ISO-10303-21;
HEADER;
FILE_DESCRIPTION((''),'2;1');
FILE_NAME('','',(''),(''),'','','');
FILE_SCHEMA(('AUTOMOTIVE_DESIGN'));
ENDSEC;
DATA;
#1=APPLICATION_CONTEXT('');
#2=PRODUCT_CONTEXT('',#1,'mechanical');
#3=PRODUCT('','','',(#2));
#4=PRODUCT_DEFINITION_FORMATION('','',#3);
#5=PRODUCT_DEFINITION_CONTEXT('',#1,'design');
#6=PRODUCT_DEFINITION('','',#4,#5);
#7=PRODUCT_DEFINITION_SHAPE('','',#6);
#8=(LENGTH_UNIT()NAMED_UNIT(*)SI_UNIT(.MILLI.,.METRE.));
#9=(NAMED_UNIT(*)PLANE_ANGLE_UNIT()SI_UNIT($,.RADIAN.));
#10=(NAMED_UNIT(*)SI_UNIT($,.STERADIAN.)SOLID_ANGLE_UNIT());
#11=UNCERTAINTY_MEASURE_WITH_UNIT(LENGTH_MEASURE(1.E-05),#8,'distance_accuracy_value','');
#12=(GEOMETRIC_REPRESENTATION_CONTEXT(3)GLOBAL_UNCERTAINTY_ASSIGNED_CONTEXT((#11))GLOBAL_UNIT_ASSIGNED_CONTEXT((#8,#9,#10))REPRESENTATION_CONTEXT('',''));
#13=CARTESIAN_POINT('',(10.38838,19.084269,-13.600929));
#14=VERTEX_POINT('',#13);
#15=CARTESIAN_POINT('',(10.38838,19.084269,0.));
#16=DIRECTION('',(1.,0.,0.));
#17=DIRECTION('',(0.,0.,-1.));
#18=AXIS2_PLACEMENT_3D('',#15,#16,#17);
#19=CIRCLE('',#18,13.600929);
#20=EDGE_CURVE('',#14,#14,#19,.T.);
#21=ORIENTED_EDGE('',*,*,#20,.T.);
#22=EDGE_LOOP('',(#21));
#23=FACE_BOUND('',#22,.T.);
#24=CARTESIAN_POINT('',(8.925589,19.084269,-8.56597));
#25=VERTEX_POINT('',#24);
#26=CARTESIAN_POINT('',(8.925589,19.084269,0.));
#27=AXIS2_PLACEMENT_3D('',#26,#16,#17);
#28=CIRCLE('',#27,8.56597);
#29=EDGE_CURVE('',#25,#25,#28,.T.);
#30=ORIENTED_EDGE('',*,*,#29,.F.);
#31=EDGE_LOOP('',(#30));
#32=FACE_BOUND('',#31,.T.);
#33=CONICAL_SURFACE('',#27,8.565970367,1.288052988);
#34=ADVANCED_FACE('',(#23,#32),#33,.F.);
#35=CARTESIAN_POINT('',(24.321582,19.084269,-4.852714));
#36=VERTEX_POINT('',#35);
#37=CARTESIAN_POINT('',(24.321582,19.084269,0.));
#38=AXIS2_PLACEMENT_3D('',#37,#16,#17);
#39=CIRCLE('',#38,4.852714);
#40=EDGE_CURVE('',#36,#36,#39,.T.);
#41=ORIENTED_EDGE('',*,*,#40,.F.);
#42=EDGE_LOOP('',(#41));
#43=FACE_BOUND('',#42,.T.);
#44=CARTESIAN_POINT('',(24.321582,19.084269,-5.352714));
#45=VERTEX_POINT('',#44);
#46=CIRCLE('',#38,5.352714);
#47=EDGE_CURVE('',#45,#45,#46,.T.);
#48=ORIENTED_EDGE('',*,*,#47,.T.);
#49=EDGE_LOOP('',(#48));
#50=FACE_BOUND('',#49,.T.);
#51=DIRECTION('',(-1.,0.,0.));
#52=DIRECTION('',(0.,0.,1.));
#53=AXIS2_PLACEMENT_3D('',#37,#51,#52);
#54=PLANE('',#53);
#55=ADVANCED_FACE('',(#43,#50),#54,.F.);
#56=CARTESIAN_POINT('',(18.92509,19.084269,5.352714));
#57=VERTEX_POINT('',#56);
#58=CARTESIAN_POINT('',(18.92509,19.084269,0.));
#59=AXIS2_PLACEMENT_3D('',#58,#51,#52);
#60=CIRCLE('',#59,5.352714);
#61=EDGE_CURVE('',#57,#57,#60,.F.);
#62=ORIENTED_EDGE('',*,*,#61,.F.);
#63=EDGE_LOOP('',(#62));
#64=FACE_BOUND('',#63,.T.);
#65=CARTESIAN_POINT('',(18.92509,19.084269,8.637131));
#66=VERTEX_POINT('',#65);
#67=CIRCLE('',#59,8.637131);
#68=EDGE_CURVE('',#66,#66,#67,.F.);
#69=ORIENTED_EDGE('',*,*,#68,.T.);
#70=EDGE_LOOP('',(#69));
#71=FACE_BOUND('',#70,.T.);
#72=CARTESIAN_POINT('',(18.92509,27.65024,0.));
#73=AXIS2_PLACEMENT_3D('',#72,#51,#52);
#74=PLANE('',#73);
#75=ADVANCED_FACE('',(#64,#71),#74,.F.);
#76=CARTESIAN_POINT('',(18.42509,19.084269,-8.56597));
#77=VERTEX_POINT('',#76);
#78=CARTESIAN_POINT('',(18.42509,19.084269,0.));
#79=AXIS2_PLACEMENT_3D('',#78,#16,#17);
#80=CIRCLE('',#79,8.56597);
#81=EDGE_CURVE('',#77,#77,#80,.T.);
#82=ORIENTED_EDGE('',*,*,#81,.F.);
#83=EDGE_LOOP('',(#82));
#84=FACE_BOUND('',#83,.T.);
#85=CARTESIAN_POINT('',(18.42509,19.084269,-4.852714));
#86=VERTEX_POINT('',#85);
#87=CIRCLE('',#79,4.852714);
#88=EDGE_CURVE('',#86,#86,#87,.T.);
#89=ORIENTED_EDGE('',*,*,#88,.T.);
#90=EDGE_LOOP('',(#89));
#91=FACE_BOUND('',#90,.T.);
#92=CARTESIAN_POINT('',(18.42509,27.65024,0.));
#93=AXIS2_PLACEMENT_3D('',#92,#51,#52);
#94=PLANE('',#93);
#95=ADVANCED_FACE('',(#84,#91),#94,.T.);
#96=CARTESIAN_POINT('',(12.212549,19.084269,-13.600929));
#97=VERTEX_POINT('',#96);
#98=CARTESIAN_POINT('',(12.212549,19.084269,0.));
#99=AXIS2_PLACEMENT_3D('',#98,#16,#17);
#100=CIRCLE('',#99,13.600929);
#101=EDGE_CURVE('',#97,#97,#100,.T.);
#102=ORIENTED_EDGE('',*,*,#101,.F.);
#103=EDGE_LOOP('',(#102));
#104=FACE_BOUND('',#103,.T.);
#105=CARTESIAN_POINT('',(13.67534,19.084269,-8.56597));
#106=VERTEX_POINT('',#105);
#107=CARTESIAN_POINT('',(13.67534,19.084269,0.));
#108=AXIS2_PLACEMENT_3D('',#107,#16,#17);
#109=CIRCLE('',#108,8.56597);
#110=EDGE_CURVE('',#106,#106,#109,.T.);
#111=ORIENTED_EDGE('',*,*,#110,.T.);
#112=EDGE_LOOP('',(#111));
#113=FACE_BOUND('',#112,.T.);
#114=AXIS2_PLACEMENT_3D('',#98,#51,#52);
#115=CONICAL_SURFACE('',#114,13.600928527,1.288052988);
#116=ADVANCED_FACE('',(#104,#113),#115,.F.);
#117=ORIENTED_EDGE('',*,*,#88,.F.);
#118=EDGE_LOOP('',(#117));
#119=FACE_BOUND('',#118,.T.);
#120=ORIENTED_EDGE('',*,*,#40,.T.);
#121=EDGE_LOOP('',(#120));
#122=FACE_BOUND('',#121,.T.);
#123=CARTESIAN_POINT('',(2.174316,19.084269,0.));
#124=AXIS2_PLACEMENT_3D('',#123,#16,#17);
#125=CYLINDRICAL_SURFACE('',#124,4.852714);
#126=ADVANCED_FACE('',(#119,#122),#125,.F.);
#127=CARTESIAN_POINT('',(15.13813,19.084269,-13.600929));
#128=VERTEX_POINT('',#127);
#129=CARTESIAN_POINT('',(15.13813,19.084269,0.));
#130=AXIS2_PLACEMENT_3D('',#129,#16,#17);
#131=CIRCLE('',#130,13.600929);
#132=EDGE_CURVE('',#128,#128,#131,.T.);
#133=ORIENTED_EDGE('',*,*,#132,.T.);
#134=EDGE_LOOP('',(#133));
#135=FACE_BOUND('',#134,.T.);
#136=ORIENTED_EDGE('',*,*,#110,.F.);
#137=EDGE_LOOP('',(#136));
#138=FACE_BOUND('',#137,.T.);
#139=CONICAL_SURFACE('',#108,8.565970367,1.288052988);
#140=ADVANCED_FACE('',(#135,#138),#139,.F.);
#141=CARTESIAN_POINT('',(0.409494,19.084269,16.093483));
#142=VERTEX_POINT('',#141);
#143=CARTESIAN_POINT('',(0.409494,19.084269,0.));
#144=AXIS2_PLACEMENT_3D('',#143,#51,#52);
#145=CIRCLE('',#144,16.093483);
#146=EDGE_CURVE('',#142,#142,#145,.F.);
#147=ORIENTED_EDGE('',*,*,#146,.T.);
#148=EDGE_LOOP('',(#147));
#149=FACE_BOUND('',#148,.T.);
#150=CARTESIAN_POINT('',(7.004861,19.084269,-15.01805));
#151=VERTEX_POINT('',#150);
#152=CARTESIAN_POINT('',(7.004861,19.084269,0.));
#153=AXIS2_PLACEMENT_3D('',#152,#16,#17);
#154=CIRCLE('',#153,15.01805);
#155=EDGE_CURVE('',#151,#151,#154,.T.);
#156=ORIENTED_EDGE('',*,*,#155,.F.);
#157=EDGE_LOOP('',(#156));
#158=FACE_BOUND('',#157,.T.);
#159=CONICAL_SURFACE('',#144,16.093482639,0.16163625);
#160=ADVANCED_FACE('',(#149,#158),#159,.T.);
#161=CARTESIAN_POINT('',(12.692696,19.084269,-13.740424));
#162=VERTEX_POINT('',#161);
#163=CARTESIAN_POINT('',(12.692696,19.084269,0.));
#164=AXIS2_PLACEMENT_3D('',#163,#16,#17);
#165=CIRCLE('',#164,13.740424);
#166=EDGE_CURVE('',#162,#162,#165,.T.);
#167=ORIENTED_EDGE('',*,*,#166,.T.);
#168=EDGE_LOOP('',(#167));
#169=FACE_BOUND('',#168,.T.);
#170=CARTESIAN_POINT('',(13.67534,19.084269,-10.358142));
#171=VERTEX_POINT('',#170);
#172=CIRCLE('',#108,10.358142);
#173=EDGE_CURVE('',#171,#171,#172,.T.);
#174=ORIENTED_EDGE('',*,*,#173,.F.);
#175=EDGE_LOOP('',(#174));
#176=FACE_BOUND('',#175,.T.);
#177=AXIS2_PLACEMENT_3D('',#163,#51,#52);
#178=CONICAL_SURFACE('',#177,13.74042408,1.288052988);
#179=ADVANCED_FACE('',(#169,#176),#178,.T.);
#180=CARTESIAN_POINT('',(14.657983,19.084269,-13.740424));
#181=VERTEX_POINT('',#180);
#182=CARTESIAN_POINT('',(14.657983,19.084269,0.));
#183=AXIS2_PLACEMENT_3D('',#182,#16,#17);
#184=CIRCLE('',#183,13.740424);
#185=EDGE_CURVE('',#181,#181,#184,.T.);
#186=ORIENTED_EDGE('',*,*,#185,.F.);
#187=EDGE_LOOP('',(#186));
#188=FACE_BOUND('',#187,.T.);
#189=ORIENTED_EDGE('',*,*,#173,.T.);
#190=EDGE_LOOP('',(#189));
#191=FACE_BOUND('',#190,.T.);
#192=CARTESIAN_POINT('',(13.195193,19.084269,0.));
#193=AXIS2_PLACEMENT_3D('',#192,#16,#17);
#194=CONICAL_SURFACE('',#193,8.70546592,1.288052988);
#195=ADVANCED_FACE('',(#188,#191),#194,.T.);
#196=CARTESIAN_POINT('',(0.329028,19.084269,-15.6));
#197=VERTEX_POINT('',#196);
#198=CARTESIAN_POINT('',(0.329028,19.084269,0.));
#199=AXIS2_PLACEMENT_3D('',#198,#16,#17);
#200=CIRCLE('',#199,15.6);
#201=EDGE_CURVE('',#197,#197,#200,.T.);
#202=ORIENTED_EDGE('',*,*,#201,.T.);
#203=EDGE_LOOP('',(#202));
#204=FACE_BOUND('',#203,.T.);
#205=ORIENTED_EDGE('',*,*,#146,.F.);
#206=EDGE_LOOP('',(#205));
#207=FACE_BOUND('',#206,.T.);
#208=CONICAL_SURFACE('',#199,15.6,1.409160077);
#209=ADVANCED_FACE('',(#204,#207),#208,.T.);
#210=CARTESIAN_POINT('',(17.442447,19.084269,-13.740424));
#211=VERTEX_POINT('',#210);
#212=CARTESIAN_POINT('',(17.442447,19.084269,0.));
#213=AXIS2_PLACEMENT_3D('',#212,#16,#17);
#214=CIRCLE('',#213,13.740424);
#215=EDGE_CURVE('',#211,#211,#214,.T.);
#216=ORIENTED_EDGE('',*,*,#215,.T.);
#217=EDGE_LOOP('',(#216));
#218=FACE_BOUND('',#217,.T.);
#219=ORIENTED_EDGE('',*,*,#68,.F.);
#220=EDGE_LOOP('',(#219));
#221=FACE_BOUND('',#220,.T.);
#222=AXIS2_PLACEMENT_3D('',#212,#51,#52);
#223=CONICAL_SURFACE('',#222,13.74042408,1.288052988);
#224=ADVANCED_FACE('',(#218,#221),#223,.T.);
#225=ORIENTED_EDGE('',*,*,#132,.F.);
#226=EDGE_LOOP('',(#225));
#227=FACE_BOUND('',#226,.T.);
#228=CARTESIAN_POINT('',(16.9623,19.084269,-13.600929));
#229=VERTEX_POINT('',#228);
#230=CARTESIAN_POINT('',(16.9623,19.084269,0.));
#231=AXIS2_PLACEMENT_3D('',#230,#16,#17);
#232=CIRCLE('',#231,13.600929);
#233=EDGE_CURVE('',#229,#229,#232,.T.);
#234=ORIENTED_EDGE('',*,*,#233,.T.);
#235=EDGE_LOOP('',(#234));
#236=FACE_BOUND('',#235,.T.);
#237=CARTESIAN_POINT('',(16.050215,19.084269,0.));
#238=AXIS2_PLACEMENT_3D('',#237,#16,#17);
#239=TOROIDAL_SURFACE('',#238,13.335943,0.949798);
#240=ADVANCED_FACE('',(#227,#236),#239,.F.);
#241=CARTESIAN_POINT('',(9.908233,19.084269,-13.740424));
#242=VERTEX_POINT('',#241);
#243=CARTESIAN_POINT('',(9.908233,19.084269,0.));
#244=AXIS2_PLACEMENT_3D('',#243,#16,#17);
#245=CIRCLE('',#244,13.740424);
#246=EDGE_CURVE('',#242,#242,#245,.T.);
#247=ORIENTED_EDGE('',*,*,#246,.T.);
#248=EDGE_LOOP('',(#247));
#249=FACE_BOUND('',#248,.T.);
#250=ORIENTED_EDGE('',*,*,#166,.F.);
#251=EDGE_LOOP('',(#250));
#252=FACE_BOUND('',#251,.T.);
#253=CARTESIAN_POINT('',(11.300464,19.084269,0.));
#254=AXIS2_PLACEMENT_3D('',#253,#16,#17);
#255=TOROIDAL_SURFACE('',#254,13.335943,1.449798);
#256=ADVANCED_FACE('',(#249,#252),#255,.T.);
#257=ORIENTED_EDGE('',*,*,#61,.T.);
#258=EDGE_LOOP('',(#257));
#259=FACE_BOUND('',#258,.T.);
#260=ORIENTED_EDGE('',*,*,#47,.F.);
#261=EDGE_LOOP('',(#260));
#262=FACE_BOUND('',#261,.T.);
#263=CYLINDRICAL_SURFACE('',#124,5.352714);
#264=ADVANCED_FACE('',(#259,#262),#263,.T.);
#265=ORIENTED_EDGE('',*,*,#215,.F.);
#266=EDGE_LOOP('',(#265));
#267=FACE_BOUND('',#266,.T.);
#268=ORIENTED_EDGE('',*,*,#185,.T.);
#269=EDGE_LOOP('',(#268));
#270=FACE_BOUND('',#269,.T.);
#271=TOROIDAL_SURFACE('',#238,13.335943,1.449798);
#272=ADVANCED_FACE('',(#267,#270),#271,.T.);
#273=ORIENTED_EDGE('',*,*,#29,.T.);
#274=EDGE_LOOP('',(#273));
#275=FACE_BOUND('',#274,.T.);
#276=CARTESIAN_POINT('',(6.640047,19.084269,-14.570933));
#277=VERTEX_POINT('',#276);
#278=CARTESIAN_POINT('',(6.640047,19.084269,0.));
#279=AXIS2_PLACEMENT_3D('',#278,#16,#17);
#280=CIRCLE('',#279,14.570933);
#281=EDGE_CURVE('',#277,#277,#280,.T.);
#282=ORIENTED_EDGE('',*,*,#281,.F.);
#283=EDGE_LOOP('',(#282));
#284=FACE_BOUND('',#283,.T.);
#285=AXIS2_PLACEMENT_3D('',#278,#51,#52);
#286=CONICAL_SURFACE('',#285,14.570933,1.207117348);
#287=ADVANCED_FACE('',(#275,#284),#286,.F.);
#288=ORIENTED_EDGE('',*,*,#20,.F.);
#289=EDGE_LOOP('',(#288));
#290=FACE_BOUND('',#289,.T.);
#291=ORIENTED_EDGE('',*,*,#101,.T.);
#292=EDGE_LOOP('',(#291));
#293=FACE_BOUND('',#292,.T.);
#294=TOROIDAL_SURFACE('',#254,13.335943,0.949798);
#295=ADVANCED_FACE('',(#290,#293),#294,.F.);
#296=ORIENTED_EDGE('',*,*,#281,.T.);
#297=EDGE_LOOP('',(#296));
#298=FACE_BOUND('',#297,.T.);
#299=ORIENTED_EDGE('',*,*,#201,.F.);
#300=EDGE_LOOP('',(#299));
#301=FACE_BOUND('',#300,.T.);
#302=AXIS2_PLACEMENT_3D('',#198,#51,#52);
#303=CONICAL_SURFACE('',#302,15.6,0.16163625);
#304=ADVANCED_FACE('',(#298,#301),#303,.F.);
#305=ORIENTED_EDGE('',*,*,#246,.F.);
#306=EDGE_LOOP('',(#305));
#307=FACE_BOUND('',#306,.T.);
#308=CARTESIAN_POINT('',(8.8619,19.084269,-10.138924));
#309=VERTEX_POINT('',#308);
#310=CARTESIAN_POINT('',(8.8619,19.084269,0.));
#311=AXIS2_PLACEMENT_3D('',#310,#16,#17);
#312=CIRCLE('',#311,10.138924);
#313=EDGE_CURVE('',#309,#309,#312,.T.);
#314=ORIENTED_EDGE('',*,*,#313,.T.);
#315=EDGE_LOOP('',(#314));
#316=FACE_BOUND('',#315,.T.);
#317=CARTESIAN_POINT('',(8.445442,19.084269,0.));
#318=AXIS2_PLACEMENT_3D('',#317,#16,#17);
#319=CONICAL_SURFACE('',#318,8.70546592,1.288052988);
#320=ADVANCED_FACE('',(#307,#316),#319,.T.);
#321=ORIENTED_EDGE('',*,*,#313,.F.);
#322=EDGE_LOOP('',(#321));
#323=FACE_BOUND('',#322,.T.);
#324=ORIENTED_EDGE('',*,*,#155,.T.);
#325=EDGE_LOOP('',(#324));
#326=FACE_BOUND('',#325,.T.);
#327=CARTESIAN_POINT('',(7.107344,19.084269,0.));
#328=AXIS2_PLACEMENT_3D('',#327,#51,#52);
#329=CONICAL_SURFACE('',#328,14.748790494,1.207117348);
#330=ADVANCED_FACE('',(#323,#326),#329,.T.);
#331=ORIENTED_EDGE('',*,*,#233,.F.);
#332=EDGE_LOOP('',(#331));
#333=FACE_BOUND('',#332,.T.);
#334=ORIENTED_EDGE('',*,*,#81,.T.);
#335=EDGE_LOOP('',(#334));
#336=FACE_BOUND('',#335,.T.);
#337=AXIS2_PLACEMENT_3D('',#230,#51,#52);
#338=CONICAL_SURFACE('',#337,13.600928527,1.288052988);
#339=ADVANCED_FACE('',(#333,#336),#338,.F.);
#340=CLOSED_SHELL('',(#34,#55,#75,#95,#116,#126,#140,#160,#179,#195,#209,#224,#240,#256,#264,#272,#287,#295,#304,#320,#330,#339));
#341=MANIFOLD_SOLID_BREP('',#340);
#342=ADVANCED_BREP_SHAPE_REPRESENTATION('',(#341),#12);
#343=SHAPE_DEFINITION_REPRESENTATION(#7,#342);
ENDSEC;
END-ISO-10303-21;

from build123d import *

# Parameters (mm, degrees)
SCALE1_SCALE = 2


# Read off the part's stored shape, not the designer's step: Thicken1
with BuildPart() as part:
    # Thicken1 outline → Thicken1 (revolve)
    with BuildSketch(Plane(origin=(0, 19.084269403, 0), x_dir=(0, 1, 0), z_dir=(0, 0, -1))):
        with BuildLine():
            Line((2.67635712, 17.996787125), (2.42635712, 17.996787125))
            Line((2.42635712, 17.996787125), (2.42635712, 15.04854118))
            Line((2.42635712, 15.04854118), (4.282985184, 15.04854118))
            Line((4.282985184, 15.04854118), (6.800464263, 14.317145896))
            ThreePointArc((6.800464263, 14.317145896), (7.142870575, 13.861103506), (6.800464263, 13.405061117))
            Line((6.800464263, 13.405061117), (4.282985184, 12.673665834))
            Line((4.282985184, 12.673665834), (6.800464263, 11.94227055))
            ThreePointArc((6.800464263, 11.94227055), (7.142870575, 11.48622816), (6.800464263, 11.030185771))
            Line((6.800464263, 11.030185771), (4.282985184, 10.298790487))
            Line((4.282985184, 10.298790487), (7.2854665, 9.15601935))
            Line((7.2854665, 9.15601935), (7.8, 6.000509818))
            Line((7.8, 6.000509818), (8.046741319, 6.040743153))
            Line((8.046741319, 6.040743153), (7.509025109, 9.338426646))
            Line((7.509025109, 9.338426646), (5.069461996, 10.2669461))
            Line((5.069461996, 10.2669461), (6.87021204, 10.79011235))
            ThreePointArc((6.87021204, 10.79011235), (7.392870575, 11.48622816), (6.87021204, 12.182343971))
            Line((6.87021204, 12.182343971), (5.179071097, 12.673665834))
            Line((5.179071097, 12.673665834), (6.87021204, 13.164987696))
            ThreePointArc((6.87021204, 13.164987696), (7.392870575, 13.861103507), (6.87021204, 14.557219317))
            Line((6.87021204, 14.557219317), (4.318565453, 15.29854118))
            Line((4.318565453, 15.29854118), (2.67635712, 15.29854118))
            Line((2.67635712, 15.29854118), (2.67635712, 17.996787125))
        make_face()
    revolve(axis=Axis((0, 19.084269403, 0), (1, 0, 0)))


with BuildPart() as part_1:
    # Scale1: scaled about (11.67199192, 19.084269403, 0)
    add(part.part.scale(SCALE1_SCALE).moved(Location((-11.67199192, -19.084269403, 0))))


solid = part_1.part
